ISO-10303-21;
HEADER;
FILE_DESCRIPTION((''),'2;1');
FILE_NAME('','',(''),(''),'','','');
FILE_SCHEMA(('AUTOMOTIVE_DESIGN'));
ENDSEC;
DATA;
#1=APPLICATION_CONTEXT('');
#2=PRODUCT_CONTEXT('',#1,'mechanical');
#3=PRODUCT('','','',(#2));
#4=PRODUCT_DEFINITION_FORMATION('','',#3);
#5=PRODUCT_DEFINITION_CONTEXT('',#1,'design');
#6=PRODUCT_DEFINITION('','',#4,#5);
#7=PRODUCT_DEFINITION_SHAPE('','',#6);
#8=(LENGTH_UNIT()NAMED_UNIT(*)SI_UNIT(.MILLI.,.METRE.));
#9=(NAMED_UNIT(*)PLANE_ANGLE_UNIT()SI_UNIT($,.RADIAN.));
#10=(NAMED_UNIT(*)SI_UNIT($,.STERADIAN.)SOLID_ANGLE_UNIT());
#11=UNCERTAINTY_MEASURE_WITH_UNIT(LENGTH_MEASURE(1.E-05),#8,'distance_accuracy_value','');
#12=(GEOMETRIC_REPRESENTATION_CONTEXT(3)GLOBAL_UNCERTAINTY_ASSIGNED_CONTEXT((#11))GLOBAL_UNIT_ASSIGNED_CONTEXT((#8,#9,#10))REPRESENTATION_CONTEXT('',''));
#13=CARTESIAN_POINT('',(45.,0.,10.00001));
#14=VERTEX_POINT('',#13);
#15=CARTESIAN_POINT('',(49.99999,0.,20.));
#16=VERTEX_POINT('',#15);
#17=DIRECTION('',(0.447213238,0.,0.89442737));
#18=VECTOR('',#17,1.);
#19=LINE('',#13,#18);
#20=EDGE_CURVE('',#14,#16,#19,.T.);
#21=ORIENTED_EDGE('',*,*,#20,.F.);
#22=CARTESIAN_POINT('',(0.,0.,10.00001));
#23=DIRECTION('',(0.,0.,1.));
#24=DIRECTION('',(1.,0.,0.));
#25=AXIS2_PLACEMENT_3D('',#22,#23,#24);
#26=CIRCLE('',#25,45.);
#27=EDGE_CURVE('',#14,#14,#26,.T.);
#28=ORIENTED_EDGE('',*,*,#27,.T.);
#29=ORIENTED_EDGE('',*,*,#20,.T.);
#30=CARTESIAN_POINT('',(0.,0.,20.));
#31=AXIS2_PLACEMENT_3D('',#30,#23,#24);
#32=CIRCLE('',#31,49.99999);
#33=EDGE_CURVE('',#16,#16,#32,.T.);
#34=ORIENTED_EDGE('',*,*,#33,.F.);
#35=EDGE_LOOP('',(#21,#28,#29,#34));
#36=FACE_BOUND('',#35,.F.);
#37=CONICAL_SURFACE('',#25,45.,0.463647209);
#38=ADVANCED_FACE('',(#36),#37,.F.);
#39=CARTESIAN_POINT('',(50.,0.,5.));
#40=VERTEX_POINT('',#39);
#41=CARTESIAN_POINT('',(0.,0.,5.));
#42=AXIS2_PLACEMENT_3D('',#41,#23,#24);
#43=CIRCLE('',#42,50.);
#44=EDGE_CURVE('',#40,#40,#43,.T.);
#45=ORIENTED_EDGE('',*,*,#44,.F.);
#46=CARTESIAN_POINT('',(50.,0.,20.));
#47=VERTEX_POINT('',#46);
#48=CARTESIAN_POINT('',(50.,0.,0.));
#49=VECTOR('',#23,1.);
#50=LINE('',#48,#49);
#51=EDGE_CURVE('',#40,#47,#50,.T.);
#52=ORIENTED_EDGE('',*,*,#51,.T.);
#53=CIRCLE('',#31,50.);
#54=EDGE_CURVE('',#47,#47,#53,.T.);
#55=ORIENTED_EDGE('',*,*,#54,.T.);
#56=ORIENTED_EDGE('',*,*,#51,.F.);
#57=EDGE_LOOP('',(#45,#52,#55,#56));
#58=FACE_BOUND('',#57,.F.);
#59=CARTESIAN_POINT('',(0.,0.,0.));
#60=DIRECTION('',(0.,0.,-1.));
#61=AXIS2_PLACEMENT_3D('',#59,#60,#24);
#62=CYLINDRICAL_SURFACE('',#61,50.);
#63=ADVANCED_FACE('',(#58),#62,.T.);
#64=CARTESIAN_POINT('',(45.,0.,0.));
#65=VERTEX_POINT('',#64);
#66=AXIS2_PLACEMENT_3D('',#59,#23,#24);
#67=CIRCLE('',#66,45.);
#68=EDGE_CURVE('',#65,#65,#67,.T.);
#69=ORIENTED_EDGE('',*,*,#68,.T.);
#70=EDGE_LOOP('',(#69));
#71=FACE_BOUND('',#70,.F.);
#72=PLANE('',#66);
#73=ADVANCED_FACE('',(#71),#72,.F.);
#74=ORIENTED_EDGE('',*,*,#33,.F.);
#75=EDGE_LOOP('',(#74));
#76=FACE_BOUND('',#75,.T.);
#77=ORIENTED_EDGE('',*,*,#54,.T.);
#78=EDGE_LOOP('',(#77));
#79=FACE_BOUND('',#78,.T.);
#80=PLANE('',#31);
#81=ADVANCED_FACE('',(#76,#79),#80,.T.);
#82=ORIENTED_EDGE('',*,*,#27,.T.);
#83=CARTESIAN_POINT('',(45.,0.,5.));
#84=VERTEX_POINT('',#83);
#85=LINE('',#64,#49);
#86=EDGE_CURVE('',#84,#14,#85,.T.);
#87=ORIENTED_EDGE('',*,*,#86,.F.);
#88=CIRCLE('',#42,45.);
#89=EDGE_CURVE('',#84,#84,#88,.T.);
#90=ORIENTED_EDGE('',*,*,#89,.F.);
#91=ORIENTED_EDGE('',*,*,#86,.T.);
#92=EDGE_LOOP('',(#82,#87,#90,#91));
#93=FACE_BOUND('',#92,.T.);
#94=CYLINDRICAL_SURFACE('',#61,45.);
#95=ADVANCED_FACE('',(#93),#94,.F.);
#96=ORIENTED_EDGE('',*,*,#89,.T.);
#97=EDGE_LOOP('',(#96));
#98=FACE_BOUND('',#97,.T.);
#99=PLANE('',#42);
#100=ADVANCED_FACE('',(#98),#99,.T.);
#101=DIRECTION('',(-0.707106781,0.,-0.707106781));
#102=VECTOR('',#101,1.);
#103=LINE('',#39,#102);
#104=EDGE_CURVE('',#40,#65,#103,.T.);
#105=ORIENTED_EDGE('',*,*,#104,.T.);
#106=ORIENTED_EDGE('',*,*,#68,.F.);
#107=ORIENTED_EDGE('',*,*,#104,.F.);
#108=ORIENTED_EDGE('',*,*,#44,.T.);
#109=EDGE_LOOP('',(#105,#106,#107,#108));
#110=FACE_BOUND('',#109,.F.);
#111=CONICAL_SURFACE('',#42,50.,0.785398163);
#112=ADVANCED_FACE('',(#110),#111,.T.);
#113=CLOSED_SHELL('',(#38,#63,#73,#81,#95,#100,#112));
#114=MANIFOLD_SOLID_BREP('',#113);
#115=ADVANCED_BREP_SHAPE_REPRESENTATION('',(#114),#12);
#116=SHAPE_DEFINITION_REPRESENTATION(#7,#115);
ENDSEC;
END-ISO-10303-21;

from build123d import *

# Parameters (mm, degrees)
F0_R     = 45
F1_DEPTH = 5
F0_R_2   = 50
F2_DEPTH = 20
F3_SIZE2 = 5
F3_SIZE  = 5
F4_SIZE2 = 4.99999
F4_SIZE  = 9.99999


# Not quite as in the source:
# - a fillet or chamfer is up to 0.001 mm smaller than in the source, because OpenCascade refuses the exact size
# - a feature of the source that left no trace in its solid (it failed there, or was rolled back) is left out


with BuildPart() as f1:
    # F0 (on Top) → F1 (new body)
    with BuildSketch(Plane.XY):
        Circle(F0_R)
    extrude(amount=F1_DEPTH)

    # F0 (on Top) → F2 (join)
    with BuildSketch(Plane.XY):
        Circle(F0_R_2)
        Circle(F0_R, mode=Mode.SUBTRACT)
    extrude(amount=F2_DEPTH)

    # F3
    f3_edges = [f1.edges().sort_by_distance(p)[0] for p in [
        (-50, 0, 0),
    ]]
    chamfer(f3_edges, length=F3_SIZE, length2=F3_SIZE2)

    # F4 (size 10 and 5 in the source; OpenCascade refuses exactly that, so slightly less here)
    f4_edges = [f1.edges().sort_by_distance(p)[0] for p in [
        (-45, 0, 20),
    ]]
    f4_side = f1.faces().sort_by_distance((-45, 0, 12.5))[0]
    chamfer(f4_edges, length=F4_SIZE, length2=F4_SIZE2, reference=f4_side)


solid = f1.part
